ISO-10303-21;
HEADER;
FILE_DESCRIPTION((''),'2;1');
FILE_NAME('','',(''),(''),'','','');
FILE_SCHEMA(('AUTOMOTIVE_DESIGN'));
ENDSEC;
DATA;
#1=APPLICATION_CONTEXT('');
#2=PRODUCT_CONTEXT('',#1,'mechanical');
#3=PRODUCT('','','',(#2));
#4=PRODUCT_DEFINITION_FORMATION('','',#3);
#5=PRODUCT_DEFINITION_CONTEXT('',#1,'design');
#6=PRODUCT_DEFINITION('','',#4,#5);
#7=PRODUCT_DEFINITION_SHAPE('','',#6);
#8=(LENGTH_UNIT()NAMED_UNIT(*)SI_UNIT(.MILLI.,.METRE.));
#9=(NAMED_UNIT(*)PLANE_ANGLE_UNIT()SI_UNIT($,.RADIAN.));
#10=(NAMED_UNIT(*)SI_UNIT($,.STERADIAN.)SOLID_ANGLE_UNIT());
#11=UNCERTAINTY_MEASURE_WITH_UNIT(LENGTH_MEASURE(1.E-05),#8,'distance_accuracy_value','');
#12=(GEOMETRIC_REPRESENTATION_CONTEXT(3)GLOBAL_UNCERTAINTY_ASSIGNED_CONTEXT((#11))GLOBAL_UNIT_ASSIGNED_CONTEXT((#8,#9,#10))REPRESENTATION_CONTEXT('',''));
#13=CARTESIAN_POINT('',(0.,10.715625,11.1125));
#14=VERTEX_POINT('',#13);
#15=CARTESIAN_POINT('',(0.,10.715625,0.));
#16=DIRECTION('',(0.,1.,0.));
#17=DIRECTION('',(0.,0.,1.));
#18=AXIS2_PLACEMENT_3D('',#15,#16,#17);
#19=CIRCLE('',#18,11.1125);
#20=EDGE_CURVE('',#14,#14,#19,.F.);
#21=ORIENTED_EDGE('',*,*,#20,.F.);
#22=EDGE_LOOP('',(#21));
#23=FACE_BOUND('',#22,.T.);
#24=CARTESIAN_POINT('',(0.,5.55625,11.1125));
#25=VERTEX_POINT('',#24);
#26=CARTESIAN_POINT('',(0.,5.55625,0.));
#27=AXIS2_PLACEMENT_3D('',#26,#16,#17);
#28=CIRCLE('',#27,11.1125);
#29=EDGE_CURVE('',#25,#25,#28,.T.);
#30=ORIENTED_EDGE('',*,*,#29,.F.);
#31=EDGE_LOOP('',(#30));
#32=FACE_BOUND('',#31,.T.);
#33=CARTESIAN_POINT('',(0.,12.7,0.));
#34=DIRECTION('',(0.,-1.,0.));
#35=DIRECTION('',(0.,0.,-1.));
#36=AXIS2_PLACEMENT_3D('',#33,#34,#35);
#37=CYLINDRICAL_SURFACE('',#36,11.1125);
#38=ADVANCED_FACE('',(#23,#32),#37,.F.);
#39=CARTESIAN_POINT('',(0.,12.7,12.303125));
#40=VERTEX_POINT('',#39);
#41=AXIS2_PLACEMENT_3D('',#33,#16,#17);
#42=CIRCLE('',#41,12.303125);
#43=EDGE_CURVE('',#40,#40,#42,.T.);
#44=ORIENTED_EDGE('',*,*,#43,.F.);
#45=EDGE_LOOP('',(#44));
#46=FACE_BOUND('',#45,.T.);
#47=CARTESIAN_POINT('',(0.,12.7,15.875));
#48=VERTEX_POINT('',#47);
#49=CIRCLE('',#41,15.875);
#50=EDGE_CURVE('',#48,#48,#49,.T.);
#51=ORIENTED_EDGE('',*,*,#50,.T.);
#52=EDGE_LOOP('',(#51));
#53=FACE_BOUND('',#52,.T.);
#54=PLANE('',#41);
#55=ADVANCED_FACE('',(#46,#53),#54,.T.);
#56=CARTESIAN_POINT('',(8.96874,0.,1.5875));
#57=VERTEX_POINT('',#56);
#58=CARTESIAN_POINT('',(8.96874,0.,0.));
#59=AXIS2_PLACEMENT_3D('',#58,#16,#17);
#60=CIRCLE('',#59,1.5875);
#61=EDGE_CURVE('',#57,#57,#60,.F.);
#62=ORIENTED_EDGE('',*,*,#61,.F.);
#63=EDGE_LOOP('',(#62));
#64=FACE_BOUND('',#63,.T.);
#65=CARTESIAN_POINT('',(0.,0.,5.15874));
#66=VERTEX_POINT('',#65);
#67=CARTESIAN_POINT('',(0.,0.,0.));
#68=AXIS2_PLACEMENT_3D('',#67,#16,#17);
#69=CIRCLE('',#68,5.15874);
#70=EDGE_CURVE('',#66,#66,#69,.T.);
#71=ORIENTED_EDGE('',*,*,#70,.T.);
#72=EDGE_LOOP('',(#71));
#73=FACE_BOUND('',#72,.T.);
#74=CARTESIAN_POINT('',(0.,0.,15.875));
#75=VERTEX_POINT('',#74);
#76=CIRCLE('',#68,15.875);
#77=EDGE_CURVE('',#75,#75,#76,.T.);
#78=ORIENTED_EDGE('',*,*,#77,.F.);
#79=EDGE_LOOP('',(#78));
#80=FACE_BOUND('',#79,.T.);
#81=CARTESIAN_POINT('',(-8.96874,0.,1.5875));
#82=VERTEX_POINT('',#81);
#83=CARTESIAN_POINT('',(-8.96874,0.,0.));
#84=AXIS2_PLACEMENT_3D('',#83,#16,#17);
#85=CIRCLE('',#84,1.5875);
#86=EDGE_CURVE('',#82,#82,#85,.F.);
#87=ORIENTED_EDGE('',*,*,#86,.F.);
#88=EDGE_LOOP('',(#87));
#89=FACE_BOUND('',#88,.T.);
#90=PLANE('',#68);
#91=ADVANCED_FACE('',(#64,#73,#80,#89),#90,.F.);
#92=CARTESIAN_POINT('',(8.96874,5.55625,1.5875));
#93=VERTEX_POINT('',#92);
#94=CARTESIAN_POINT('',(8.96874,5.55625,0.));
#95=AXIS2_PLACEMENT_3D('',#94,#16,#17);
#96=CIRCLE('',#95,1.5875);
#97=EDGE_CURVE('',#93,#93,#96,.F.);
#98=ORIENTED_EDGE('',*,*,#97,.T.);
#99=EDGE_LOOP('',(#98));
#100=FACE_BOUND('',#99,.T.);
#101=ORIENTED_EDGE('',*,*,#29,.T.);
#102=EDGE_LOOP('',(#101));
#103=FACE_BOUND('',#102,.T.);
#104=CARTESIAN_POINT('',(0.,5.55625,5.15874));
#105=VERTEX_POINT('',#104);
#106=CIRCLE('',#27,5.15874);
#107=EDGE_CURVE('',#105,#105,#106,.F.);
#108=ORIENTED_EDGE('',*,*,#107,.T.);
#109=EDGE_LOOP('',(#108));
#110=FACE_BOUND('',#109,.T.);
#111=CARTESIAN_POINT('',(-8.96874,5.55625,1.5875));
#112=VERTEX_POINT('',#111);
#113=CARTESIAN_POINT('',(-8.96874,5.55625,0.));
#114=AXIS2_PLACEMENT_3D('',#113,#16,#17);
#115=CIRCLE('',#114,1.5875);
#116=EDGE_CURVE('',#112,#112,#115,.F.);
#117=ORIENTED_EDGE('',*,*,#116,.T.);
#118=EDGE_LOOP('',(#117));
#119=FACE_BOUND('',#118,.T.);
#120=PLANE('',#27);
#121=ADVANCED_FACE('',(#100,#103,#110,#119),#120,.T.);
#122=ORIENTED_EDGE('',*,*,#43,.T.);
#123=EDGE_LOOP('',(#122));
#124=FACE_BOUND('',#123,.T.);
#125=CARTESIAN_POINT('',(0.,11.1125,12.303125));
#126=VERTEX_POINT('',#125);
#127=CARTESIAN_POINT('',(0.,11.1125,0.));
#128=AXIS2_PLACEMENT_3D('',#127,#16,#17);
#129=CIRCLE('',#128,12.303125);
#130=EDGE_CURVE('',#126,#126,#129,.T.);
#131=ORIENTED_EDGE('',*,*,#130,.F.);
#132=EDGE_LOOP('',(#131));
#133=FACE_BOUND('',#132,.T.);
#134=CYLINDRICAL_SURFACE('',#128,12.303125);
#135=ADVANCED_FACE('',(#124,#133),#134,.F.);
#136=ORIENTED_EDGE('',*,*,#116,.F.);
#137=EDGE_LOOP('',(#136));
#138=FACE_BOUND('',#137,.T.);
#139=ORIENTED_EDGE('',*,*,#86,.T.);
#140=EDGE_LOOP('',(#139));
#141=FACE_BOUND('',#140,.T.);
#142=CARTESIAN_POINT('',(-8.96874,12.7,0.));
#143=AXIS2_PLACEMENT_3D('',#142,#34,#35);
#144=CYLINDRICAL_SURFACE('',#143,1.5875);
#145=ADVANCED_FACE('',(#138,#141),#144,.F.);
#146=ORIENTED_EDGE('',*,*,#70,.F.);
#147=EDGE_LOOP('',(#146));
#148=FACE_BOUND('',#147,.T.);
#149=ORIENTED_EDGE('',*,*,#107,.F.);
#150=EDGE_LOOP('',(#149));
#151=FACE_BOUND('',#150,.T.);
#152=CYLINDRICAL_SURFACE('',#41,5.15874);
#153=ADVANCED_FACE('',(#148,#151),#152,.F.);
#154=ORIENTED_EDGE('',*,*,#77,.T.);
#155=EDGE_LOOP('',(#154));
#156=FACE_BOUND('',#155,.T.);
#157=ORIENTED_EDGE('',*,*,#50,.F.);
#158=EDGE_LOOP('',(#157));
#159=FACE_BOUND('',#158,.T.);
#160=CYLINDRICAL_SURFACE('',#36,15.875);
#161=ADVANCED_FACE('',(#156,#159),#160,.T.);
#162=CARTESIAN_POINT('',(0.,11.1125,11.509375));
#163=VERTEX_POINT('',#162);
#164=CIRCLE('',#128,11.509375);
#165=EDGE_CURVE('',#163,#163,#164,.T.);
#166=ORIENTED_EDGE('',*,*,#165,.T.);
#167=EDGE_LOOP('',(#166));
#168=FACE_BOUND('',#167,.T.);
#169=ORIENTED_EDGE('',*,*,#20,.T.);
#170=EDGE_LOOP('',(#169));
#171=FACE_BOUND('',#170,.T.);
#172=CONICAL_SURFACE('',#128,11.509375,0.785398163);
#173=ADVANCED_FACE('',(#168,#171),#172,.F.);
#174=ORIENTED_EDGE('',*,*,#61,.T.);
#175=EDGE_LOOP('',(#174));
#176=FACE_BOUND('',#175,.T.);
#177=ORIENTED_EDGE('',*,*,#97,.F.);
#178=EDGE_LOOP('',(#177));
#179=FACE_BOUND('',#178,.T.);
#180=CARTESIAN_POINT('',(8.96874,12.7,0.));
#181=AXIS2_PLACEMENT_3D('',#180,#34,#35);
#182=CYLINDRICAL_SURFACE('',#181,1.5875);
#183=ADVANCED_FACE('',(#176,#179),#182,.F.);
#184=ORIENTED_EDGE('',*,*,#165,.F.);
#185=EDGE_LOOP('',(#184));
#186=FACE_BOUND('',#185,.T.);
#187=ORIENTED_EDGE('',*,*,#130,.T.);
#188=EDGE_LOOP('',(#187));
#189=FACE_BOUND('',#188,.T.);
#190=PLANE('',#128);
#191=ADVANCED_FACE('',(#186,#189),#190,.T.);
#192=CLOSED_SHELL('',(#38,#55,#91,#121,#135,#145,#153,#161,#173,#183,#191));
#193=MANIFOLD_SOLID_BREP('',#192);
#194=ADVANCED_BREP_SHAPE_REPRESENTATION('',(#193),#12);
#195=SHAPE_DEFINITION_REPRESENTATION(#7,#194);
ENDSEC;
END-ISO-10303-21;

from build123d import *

# Parameters (mm, degrees)
SKETCH1_R               = 15.875
BOSS_EXTRUDE1_DEPTH     = 12.7
F_3_8_CLEARANCE_HOLE1_D = 10.31748
CUT_EXTRUDE1_DEPTH      = 26.793821935
CUT_EXTRUDE1_DEPTH_BACK = 26.793821935
SKETCH4_R               = 1.5875


with BuildPart() as part:
    # Sketch1 → Boss-Extrude1 (new body)
    with BuildSketch(Plane(origin=(0, 0, 0), x_dir=(1, 0, 0), z_dir=(0, 1, 0))):
        with Locations(Location((0, 0, 0), (0, 0, 270))):
            Circle(SKETCH1_R)
    extrude(amount=BOSS_EXTRUDE1_DEPTH)

    # 3/8 Clearance Hole1 (through all)
    with Locations(Plane(origin=(0, 12.7, 0), x_dir=(1, 0, 0), z_dir=(0, 1, 0))):
        with Locations((0, 0)):
            Hole(F_3_8_CLEARANCE_HOLE1_D / 2)


with BuildPart() as body_2:
    # uxcell-FR6ZZ: read off the stored shape, not the designer's step
    # uxcell-FR6ZZ outline → uxcell-FR6ZZ (revolve)
    with BuildSketch(Plane(origin=(-41.000177455, 0, 16.423895222), x_dir=(1, 0, 0), z_dir=(0, 0, 1))):
        Polygon((12.303125, 21.164419461), (4.7625, 21.164419461), (4.7625, 14.020669461), (11.1125, 14.020669461), (11.1125, 19.180044461), (11.509375, 19.576919461), (12.303125, 19.576919461), align=None)
    revolve(axis=Axis((-41.000177455, 0, 16.423895222), (0, 1, 0)))


with BuildPart() as body_2_1:
    # Body-Move/Copy2: read off the stored shape, not the designer's step
    # Body-Move/Copy2: moved
    add(body_2.part.moved(Location((41.0001775, -8.4644195, -16.4238952))))


with BuildPart() as part_1:
    add(part.part)

    # Combine1: cut body 2
    add(body_2_1.part, mode=Mode.SUBTRACT)

    # Sketch4 → Cut-Extrude1 (cut, two sides: drawn at the far end of the back side and taken through both)
    with BuildSketch(Plane(origin=(0, 0, 0), x_dir=(1, 0, 0), z_dir=(0, 1, 0)).offset(-CUT_EXTRUDE1_DEPTH_BACK)):
        with Locations(Location((-8.96874, 0, 0), (0, 0, 270))):
            Circle(SKETCH4_R)
        with Locations(Location((8.96874, 0, 0), (0, 0, 270))):
            Circle(SKETCH4_R)
    extrude(amount=CUT_EXTRUDE1_DEPTH + CUT_EXTRUDE1_DEPTH_BACK, mode=Mode.SUBTRACT)


solid = part_1.part
